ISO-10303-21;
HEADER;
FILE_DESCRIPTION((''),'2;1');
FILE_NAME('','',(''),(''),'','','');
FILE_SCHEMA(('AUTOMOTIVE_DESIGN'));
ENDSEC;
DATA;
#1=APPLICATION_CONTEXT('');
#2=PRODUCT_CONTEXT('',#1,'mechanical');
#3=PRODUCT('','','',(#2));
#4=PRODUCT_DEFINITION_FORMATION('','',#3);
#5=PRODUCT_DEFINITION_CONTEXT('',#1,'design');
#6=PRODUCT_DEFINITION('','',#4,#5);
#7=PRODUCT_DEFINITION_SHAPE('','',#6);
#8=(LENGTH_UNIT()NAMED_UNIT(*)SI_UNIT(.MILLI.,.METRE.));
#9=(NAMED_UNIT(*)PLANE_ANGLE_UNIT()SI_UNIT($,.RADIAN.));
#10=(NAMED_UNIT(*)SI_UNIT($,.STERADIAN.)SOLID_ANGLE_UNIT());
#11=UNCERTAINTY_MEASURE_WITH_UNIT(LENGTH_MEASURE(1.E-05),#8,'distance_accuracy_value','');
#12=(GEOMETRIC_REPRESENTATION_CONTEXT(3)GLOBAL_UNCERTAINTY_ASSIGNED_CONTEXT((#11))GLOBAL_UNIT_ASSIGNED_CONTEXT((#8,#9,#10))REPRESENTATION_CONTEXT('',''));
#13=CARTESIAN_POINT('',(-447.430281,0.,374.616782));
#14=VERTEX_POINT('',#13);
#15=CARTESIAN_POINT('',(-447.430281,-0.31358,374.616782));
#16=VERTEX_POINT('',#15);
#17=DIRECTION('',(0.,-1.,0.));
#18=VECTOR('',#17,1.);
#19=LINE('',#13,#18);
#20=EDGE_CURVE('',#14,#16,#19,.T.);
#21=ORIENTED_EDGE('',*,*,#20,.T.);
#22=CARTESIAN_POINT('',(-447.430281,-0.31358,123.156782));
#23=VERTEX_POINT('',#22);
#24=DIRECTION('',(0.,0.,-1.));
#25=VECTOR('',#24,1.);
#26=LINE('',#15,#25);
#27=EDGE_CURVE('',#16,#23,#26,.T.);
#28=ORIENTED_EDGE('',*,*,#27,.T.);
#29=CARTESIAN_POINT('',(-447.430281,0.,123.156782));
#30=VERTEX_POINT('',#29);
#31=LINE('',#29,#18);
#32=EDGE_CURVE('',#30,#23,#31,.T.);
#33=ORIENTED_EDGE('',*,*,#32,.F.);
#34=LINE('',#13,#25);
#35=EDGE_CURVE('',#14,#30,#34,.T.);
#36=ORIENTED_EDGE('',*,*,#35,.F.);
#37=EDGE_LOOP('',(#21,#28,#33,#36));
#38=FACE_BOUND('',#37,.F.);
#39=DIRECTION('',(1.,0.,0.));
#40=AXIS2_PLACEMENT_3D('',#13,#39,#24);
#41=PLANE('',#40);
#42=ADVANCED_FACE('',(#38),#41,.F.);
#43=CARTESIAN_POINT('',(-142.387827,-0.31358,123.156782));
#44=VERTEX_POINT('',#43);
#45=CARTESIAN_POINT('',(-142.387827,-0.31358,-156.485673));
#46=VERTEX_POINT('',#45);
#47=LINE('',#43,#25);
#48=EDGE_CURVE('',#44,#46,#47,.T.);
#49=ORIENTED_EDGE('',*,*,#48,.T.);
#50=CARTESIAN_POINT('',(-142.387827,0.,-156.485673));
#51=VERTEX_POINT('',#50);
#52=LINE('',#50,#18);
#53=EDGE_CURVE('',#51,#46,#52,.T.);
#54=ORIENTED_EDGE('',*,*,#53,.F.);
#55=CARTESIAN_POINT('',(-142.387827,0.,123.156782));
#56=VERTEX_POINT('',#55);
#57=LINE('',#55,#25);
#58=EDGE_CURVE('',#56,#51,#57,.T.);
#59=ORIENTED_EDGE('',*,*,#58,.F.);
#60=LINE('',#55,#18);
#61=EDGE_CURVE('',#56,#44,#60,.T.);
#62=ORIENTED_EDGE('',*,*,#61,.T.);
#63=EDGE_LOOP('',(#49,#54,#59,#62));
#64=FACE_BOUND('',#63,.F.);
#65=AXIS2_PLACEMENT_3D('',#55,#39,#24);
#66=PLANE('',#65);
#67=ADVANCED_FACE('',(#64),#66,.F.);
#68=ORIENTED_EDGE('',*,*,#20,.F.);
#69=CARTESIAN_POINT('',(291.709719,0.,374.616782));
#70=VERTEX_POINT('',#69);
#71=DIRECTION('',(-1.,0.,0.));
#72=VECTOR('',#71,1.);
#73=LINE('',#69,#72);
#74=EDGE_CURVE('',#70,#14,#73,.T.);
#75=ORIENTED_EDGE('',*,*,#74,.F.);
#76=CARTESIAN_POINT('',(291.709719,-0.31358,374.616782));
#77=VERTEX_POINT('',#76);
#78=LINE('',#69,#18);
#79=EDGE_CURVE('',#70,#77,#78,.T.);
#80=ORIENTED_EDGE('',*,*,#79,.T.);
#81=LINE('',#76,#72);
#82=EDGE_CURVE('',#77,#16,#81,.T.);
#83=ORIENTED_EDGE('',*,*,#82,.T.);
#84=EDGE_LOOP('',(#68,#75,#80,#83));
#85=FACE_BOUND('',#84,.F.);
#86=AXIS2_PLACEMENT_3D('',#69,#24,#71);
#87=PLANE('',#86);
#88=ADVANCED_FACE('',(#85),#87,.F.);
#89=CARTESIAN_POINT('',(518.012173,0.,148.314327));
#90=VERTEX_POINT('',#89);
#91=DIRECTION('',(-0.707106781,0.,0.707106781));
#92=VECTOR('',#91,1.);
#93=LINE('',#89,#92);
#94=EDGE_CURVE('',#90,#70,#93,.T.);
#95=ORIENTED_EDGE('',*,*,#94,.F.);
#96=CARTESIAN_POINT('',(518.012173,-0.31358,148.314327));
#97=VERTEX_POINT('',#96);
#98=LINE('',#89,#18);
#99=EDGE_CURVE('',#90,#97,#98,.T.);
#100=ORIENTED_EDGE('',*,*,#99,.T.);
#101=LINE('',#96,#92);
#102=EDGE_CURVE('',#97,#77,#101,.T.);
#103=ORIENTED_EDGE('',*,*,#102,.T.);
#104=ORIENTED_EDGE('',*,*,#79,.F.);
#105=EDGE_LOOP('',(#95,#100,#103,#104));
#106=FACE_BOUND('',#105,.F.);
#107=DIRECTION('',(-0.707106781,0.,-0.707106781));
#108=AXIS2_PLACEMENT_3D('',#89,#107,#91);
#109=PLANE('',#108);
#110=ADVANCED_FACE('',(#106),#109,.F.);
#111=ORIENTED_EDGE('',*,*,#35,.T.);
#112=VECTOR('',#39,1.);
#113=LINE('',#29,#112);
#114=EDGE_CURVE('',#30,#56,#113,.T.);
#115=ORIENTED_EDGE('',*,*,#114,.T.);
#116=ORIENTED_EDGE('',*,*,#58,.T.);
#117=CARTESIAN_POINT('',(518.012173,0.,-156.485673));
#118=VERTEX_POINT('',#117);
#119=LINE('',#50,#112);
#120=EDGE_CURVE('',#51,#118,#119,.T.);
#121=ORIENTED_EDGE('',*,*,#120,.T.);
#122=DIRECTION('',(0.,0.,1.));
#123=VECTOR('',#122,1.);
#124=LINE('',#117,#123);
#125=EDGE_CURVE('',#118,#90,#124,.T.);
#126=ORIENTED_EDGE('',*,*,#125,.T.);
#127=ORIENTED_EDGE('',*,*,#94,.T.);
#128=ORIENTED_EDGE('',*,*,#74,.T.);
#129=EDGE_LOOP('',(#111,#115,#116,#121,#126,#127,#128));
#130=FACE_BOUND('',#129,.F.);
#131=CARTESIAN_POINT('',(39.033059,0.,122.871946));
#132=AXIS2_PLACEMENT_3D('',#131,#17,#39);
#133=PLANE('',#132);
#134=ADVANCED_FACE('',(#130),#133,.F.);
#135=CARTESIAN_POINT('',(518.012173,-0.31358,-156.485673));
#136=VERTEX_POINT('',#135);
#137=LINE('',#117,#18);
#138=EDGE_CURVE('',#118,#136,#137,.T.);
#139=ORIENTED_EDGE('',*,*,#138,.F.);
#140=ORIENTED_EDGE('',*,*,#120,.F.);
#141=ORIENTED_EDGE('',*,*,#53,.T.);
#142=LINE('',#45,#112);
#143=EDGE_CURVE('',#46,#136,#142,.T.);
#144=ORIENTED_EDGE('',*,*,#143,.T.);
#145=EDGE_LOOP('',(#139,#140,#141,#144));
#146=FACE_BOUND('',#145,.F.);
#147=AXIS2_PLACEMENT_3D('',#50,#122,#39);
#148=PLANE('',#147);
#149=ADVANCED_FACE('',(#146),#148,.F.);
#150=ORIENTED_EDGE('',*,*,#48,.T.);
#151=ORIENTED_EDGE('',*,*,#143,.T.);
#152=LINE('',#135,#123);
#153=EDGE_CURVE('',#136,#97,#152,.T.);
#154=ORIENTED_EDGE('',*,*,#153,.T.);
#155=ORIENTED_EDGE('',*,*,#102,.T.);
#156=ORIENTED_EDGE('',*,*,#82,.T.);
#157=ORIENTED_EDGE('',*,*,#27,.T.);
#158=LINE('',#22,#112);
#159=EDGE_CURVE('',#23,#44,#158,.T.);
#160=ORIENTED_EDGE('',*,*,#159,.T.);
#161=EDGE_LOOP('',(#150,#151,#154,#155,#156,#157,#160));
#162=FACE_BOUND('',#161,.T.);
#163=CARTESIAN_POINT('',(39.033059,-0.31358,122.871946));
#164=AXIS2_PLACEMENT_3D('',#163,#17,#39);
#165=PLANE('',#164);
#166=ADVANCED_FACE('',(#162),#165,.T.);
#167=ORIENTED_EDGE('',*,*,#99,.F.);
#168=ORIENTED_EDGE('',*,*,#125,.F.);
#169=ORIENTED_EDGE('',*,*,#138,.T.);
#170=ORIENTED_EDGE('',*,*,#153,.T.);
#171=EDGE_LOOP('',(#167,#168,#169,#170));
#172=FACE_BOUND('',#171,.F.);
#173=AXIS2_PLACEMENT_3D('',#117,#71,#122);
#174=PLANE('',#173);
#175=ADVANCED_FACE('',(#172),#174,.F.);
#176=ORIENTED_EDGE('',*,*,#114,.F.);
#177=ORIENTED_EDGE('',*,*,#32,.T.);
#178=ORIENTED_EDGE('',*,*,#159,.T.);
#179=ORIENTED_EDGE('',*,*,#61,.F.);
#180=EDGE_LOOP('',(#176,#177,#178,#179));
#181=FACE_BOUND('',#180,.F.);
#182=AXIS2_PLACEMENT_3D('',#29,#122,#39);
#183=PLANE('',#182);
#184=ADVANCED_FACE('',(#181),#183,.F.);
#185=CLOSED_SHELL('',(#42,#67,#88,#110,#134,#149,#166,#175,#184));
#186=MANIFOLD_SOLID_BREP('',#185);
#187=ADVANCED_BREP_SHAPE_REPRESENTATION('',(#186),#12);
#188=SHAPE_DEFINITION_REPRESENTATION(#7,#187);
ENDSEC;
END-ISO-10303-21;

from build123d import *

# Parameters (mm, degrees)
F1_DEPTH = 0.3135802469


# Not quite as in the source:
# - a length typed as a fraction of an inch, garbled in the dataset ("3 / 203.2 mm" for 3/8 in), is restored


with BuildPart() as f1:
    # F0 (on Front) → F1 (new body)
    with BuildSketch(Plane.XZ):
        Polygon((-447.4302810179, 374.6167815521), (-447.4302810179, 123.1567815521), (-142.387826767, 123.1567815521), (-142.387826767, -156.4856726988), (518.012173233, -156.4856726988), (518.012173233, 148.3143273012), (291.7097189821, 374.6167815521), align=None)
    extrude(amount=F1_DEPTH)


solid = f1.part
